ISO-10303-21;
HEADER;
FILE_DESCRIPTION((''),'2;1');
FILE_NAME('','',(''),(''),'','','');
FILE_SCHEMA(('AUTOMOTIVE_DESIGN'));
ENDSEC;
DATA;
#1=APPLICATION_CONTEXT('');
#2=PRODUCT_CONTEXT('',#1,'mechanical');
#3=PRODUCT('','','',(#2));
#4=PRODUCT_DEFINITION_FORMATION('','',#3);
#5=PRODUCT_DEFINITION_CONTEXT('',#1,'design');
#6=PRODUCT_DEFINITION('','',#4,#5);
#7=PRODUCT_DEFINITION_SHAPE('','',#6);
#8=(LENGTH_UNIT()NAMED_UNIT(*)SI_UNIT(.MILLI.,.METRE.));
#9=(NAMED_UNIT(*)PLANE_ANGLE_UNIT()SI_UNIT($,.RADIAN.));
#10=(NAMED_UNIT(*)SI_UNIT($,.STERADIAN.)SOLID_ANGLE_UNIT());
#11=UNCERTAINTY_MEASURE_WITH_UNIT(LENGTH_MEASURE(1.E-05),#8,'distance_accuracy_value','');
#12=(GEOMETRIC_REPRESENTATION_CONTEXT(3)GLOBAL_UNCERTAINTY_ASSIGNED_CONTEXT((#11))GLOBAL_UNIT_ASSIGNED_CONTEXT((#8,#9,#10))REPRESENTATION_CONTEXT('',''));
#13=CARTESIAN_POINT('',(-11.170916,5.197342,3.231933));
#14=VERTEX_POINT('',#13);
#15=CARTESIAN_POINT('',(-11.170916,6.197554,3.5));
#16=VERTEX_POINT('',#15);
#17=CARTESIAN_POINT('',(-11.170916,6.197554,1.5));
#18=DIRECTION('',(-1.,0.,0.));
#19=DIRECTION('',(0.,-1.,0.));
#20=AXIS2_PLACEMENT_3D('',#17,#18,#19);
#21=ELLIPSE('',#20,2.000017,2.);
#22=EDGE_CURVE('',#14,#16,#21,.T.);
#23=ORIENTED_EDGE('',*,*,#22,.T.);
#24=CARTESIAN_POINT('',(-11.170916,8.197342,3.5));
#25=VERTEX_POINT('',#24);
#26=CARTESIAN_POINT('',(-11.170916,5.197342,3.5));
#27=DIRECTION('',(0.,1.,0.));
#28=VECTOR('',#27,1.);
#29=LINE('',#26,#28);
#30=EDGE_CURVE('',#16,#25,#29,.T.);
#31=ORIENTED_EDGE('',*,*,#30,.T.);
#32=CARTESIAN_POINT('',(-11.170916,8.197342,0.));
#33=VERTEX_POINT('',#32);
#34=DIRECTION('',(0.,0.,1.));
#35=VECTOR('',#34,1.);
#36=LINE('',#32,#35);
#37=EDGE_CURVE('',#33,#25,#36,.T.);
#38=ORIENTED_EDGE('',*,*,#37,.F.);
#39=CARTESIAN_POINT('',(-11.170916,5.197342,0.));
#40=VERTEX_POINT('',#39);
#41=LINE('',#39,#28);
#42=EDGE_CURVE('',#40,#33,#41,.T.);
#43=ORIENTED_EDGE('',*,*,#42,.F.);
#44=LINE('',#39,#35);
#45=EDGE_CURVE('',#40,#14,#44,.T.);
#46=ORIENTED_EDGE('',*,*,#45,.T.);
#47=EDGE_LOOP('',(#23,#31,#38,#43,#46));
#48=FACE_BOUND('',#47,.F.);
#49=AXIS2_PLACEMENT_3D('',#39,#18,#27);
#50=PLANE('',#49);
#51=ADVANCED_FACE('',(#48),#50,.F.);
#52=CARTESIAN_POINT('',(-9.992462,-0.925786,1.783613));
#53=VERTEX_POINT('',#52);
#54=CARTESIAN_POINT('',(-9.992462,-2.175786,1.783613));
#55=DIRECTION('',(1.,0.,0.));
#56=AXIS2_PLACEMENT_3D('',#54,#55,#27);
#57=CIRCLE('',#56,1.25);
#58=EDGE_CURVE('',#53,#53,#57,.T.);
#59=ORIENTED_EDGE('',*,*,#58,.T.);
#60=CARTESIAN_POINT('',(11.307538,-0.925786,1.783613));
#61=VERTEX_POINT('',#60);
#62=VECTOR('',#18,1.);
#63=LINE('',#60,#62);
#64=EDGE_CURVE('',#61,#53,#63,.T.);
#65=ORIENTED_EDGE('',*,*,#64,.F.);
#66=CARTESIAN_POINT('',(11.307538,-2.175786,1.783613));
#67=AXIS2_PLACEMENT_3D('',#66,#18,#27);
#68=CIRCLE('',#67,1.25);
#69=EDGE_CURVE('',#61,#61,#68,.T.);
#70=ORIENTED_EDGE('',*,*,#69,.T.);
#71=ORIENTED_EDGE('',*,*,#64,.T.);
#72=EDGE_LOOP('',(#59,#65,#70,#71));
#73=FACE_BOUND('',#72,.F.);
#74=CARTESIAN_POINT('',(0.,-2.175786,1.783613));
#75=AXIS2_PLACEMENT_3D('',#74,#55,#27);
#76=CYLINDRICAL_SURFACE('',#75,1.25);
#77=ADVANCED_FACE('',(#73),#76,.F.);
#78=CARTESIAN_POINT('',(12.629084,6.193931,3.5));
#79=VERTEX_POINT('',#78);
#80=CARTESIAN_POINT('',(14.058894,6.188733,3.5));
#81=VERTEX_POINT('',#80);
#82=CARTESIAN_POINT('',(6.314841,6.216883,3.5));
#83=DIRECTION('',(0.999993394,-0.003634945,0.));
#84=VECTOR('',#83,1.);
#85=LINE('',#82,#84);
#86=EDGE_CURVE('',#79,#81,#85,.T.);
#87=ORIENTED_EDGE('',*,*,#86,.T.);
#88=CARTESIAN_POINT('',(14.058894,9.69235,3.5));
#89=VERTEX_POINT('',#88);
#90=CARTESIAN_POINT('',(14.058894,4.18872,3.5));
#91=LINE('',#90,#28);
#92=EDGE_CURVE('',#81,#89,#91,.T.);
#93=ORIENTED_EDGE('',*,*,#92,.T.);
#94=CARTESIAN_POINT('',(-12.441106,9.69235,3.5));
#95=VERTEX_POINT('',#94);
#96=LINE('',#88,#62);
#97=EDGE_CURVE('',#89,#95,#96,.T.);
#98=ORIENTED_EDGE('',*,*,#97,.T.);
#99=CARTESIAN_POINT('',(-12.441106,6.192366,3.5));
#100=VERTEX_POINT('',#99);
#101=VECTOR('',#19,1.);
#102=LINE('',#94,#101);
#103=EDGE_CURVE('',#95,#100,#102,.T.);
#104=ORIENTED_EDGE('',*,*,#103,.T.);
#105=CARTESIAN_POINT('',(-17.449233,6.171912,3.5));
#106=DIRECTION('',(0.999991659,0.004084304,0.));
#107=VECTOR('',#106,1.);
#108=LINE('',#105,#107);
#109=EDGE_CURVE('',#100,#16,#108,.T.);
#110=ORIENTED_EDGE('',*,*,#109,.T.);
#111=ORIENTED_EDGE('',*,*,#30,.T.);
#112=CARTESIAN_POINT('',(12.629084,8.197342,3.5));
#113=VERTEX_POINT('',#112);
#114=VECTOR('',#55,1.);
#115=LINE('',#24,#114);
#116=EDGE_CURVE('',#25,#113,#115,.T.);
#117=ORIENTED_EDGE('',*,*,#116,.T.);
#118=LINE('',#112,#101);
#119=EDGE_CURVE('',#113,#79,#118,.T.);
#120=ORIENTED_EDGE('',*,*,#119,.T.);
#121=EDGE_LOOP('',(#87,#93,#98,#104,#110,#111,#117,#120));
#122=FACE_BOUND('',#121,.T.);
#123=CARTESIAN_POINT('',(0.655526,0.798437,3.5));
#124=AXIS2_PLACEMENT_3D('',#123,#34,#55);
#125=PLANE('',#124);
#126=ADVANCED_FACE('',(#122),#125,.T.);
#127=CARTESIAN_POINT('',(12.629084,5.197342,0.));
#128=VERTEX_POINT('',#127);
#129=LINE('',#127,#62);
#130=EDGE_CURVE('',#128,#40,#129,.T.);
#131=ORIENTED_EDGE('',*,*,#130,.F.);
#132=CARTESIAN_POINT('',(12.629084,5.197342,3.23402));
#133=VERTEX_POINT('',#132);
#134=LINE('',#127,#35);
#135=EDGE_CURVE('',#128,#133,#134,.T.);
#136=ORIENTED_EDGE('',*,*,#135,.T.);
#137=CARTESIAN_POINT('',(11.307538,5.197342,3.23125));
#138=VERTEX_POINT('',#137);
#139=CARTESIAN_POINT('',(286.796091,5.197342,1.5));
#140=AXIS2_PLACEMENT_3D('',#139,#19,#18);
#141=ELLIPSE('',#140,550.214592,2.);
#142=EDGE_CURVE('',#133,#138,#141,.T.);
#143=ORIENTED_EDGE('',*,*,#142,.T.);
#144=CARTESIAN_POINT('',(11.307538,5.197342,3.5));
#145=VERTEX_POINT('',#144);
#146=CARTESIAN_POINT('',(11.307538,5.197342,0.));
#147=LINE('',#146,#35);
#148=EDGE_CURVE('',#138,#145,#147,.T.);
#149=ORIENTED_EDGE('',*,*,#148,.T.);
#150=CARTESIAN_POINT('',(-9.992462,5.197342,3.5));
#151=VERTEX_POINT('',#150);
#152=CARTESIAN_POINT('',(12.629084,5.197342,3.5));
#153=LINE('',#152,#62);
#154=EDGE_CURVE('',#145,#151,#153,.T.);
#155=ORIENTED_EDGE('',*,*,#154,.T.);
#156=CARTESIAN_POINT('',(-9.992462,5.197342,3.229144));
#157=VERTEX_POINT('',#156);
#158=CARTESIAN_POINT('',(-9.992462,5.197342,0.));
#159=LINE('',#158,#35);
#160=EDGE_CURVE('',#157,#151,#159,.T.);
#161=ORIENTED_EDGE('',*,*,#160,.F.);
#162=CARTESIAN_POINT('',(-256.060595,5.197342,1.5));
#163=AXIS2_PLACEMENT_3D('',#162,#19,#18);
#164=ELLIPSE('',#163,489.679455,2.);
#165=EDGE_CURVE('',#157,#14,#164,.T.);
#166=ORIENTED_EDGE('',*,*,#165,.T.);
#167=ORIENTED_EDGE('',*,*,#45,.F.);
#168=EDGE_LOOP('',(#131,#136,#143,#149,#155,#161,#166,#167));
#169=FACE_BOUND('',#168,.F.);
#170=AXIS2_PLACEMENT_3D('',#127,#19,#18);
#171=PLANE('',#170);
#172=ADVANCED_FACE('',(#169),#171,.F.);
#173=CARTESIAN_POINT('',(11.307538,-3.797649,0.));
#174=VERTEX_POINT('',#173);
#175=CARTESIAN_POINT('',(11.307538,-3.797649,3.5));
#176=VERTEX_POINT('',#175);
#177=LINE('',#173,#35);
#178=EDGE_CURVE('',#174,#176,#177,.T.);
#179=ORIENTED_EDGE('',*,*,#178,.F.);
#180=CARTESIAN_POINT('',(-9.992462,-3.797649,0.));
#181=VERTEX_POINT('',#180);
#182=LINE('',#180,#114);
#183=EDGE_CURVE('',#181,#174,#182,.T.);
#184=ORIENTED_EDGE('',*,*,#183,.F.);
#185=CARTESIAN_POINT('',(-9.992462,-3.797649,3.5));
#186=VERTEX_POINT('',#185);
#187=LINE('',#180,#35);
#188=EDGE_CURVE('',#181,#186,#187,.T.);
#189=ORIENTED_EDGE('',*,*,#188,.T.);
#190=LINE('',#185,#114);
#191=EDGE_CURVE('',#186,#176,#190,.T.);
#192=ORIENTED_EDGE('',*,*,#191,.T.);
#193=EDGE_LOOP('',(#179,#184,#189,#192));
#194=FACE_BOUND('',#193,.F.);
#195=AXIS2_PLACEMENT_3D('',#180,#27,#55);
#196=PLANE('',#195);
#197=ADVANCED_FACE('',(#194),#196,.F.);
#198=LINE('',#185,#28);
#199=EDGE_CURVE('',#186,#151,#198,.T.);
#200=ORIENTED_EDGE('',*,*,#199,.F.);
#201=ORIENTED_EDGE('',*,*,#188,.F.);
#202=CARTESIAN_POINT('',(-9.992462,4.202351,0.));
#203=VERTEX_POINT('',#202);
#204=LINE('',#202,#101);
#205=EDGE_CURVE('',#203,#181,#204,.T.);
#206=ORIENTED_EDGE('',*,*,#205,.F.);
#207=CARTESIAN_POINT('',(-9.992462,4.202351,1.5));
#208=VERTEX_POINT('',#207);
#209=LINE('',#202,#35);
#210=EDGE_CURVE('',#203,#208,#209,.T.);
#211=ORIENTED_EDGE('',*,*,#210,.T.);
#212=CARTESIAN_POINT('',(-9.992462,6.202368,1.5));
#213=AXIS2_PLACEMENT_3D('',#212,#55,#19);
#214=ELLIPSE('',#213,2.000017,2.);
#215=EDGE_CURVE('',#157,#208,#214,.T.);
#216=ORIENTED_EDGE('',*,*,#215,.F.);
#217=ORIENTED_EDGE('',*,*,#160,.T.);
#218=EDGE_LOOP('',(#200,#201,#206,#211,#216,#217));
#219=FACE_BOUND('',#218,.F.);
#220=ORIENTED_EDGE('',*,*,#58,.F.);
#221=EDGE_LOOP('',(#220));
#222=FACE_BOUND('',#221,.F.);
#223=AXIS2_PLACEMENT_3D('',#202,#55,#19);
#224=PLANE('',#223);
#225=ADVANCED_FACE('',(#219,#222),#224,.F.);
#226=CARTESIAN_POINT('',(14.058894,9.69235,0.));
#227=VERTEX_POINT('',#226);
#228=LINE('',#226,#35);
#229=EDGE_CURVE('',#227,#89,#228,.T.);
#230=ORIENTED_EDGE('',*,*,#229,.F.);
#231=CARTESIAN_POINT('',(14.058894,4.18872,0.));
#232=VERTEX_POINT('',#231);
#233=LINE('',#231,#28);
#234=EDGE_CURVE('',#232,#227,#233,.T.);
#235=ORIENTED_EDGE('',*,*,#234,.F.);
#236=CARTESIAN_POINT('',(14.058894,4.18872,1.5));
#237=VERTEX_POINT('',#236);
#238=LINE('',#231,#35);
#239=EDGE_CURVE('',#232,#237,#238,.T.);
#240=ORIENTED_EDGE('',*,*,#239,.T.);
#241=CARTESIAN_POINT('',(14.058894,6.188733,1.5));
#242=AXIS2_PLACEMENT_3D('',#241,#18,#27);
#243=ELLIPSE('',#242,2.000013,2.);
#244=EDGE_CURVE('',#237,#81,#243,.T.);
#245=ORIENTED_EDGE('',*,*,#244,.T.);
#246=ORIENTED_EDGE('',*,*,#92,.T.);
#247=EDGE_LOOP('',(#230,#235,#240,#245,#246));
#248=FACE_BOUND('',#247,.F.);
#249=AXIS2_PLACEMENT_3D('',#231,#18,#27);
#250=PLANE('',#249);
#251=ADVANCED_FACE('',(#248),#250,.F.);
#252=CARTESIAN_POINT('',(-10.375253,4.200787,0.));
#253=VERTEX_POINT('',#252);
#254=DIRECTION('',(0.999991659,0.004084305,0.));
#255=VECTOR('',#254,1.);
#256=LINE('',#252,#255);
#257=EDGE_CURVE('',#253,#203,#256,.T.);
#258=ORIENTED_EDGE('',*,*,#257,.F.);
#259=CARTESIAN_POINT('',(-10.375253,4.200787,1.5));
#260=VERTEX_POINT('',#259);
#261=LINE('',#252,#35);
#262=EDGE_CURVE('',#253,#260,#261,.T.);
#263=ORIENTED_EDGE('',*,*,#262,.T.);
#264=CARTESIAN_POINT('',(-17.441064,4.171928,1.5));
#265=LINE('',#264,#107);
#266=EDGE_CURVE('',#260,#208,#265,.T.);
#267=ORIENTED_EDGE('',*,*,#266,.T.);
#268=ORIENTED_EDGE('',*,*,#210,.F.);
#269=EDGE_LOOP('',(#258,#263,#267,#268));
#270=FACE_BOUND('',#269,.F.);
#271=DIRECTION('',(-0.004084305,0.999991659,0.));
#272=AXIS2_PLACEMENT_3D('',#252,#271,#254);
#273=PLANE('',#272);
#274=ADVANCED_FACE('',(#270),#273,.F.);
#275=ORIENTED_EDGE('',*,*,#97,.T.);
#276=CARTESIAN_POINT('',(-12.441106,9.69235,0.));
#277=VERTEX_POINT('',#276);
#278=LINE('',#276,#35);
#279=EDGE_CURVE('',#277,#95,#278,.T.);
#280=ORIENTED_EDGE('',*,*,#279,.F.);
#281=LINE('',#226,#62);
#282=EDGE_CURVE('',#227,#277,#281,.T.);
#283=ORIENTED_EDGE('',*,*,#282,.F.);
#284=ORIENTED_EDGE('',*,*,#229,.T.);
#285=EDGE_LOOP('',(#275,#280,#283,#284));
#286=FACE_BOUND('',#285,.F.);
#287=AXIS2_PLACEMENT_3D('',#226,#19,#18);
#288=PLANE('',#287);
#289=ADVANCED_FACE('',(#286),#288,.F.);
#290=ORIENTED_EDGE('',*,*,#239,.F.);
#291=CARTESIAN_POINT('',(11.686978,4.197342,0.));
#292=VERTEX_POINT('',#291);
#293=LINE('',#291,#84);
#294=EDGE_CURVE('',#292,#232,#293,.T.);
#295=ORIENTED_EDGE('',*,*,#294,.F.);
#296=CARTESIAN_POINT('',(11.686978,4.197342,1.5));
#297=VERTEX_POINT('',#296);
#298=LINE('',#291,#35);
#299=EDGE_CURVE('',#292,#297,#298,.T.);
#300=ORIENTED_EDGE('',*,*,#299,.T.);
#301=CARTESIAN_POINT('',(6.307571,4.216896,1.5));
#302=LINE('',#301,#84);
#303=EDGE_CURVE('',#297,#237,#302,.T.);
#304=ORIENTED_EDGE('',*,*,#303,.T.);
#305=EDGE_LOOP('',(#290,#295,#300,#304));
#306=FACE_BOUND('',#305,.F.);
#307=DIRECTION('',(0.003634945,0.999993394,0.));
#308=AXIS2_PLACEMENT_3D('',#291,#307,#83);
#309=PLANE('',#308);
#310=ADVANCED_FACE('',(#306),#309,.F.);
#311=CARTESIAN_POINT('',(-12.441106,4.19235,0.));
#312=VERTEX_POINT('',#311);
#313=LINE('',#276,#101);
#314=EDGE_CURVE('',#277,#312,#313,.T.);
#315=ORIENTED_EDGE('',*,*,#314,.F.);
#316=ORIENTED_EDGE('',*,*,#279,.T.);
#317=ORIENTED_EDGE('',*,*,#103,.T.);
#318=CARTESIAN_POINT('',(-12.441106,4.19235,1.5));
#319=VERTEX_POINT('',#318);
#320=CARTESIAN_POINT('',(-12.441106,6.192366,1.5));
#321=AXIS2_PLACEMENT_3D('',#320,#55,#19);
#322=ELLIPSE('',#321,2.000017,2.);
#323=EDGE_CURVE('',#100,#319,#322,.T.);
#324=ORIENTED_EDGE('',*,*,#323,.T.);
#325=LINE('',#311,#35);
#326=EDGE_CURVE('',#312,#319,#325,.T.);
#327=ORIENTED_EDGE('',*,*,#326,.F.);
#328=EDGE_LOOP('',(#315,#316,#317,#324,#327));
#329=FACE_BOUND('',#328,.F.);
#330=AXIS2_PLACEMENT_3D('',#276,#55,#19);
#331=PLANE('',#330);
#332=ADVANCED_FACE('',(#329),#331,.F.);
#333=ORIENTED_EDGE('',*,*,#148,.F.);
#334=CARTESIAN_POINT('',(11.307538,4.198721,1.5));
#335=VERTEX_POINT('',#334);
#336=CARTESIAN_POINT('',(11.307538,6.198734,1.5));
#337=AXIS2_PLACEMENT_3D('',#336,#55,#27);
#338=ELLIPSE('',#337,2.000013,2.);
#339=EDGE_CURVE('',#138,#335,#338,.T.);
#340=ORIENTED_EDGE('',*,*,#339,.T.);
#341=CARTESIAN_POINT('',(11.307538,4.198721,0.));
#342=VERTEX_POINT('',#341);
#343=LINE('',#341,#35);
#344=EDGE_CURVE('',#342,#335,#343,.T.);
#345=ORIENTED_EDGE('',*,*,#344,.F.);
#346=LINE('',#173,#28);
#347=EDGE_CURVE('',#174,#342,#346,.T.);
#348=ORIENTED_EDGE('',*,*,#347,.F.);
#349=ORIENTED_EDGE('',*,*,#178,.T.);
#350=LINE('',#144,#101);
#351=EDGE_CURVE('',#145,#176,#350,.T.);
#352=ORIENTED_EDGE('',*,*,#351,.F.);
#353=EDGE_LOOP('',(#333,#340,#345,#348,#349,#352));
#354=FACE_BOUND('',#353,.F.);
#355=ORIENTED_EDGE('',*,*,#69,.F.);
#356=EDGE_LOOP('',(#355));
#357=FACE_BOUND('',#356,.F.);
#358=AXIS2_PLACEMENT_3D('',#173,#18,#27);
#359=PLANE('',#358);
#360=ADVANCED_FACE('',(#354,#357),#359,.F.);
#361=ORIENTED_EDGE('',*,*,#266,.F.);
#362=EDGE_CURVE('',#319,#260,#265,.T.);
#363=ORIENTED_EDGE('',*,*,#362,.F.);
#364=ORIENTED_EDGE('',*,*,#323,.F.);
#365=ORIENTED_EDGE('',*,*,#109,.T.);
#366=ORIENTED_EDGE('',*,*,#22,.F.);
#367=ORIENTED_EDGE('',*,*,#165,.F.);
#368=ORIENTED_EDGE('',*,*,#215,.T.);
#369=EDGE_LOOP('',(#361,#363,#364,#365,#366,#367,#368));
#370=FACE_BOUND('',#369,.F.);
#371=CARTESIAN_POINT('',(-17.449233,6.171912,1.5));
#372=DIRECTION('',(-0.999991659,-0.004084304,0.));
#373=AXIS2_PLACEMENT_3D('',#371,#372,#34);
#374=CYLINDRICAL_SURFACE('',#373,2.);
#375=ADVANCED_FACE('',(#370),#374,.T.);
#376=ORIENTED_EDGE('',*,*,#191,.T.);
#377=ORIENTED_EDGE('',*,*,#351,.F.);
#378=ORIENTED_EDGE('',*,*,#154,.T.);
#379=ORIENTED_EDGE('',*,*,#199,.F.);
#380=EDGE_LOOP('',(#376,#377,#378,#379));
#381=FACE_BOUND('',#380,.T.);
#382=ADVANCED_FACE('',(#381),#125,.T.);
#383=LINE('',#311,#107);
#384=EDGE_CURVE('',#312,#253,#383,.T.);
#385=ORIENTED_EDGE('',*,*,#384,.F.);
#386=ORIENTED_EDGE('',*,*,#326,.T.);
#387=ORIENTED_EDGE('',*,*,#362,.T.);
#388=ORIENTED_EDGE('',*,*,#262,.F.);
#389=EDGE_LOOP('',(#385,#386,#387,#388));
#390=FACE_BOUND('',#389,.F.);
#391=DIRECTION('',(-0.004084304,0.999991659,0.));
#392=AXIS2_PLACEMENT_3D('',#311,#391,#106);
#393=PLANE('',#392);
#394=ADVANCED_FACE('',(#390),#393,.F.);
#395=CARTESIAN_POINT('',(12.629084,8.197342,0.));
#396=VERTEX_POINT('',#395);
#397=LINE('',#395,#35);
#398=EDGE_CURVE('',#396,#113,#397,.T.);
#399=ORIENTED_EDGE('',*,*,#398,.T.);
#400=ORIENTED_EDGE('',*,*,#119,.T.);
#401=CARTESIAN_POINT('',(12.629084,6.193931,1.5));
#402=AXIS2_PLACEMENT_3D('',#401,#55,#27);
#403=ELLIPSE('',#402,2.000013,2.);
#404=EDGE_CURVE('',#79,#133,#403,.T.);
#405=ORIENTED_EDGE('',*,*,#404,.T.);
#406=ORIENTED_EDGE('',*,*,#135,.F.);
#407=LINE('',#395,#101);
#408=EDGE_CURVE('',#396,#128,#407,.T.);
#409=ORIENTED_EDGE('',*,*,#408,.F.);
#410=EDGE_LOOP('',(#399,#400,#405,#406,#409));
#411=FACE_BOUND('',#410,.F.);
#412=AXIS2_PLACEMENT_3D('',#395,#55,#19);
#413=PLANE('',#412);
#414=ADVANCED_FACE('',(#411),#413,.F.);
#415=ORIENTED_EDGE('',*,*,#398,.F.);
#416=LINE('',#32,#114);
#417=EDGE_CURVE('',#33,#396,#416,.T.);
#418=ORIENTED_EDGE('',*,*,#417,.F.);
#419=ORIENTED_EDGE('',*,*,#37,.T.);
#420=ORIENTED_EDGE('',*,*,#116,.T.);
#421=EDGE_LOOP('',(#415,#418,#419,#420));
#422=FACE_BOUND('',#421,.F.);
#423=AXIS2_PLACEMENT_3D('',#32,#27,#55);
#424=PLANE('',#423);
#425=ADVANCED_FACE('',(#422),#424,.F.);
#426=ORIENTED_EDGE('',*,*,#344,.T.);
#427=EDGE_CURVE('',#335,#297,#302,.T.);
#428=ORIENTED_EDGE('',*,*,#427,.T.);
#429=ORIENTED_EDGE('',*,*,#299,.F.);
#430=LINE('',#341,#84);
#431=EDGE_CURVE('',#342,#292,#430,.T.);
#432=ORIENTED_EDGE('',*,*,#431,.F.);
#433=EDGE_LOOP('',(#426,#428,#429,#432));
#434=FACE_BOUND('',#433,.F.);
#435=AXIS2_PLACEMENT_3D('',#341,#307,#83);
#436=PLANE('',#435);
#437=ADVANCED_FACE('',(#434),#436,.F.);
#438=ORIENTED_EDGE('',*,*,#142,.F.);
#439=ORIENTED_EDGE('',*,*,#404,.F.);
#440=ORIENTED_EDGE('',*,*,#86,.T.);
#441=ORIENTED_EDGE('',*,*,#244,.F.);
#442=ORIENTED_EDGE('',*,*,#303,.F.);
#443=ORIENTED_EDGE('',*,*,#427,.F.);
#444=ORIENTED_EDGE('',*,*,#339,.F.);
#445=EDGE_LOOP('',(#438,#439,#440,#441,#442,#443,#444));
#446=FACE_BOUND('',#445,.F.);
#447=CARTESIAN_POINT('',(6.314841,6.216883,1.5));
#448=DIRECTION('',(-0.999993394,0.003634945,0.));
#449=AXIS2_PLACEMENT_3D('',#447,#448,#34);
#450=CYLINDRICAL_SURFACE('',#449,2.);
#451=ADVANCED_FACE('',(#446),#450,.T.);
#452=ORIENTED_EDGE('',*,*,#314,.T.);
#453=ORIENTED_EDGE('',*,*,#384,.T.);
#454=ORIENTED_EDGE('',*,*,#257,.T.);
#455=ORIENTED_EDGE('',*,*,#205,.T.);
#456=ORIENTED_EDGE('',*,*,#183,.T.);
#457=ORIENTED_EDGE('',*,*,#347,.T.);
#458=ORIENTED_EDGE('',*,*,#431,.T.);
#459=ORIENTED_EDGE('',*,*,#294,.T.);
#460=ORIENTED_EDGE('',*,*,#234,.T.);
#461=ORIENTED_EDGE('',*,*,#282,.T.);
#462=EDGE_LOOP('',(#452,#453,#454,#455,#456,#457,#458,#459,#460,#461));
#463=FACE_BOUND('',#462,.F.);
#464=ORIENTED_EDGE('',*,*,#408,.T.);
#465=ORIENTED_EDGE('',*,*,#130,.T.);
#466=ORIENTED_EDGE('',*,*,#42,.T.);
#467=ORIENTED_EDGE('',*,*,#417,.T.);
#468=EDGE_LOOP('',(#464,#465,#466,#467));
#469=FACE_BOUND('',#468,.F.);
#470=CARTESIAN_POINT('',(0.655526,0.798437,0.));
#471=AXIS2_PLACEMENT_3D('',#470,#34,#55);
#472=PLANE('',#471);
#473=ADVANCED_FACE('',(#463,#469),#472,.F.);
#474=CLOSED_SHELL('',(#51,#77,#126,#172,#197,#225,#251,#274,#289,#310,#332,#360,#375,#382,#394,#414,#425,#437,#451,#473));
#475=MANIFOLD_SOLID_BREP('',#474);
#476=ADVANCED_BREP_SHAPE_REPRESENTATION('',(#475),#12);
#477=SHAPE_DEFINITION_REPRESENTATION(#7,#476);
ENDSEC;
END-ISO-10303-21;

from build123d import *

# Parameters (mm, degrees)
F1_DEPTH      = 3.5
F2_R          = 1.25
F3_DEPTH      = 25
F3_DEPTH_BACK = 25
F4_T4_DEPTH   = 12.7513736877
F4_T9_DEPTH   = 12.4486649129


# Not quite as in the source:
# - a fillet or chamfer that OpenCascade refuses, or shapes differently, is made with other operations: its cross-section is extruded or revolved along the edge and cut away or added


with BuildPart() as f1:
    # F0 (on Top) → F1 (new body)
    with BuildSketch(Plane.XY):
        Polygon((-9.9924615563, -3.7976490931), (11.3075384437, -3.7976490931), (11.3075384437, 4.1987212708), (11.6869780256, 4.1973420195), (11.6869780256, 5.1973420195), (-10.3793237358, 5.1973420195), (-10.3752534696, 4.2007874551), (-9.9924615563, 4.2023509069), align=None)
        Polygon((11.6869780256, 5.1973420195), (11.6869780256, 4.1973420195), (14.0588939546, 4.1887201777), (14.0588939546, 9.6923498138), (-12.4411060454, 9.6923498138), (-12.4411060454, 4.1923498138), (-10.3752534696, 4.2007874551), (-10.3793237358, 5.1973420195), (-11.1709162593, 5.1973420195), (-11.1709162593, 8.1973420195), (12.6290837407, 8.1973420195), (12.6290837407, 5.1973420195), align=None)
    extrude(amount=F1_DEPTH)

    # F2 (on Right) → F3 (cut, two sides)
    with BuildSketch(Plane.YZ) as f3_sk:
        with Locations((-2.1757856011, 1.7836129991)):
            Circle(F2_R)
    extrude(amount=-F3_DEPTH, mode=Mode.SUBTRACT)
    extrude(f3_sk.sketch, amount=F3_DEPTH_BACK, mode=Mode.SUBTRACT)

    # F4: fillet of radius 2 on 2 edges, made by hand


with BuildPart() as f4_tool2:
    # F4_s3 → F4_t4 (new body)
    with BuildSketch(Plane(origin=(6.2921600495, -0.0228718094, 0), x_dir=(0, 0, 1), z_dir=(0.9999933936, -0.0036349454, 0))):
        with BuildLine():
            ThreePointArc((3.5, -6.2397958172), (2.9142135624, -4.8255822548), (1.5, -4.2397958172))
            Line((1.5, -4.2397958172), (3.5, -4.2397958172))
            Line((3.5, -4.2397958172), (3.5, -6.2397958172))
        make_face()
    extrude(amount=F4_T4_DEPTH)

    split(bisect_by=Plane.YZ.offset(11.3075384437), keep=Keep.TOP)


with BuildPart() as f1_1:
    add(f1.part)

    # F4_t1: cut F4_tool2
    add(f4_tool2.part, mode=Mode.SUBTRACT)


with BuildPart() as f4_tool7:
    # F4_s8 → F4_t9 (new body)
    with BuildSketch(Plane(origin=(-17.423734114, -0.0711644294, 0), x_dir=(0, 0, 1), z_dir=(0.9999916592, 0.0040843045, 0))):
        with BuildLine():
            ThreePointArc((3.5, -6.2431281117), (2.9142135624, -4.8289145493), (1.5, -4.2431281117))
            Line((1.5, -4.2431281117), (3.5, -4.2431281117))
            Line((3.5, -4.2431281117), (3.5, -6.2431281117))
        make_face()
    extrude(amount=F4_T9_DEPTH)

    split(bisect_by=Plane.YZ.offset(-9.9924615563), keep=Keep.BOTTOM)


with BuildPart() as f1_2:
    add(f1_1.part)

    # F4_t6: cut F4_tool7
    add(f4_tool7.part, mode=Mode.SUBTRACT)


solid = f1_2.part
